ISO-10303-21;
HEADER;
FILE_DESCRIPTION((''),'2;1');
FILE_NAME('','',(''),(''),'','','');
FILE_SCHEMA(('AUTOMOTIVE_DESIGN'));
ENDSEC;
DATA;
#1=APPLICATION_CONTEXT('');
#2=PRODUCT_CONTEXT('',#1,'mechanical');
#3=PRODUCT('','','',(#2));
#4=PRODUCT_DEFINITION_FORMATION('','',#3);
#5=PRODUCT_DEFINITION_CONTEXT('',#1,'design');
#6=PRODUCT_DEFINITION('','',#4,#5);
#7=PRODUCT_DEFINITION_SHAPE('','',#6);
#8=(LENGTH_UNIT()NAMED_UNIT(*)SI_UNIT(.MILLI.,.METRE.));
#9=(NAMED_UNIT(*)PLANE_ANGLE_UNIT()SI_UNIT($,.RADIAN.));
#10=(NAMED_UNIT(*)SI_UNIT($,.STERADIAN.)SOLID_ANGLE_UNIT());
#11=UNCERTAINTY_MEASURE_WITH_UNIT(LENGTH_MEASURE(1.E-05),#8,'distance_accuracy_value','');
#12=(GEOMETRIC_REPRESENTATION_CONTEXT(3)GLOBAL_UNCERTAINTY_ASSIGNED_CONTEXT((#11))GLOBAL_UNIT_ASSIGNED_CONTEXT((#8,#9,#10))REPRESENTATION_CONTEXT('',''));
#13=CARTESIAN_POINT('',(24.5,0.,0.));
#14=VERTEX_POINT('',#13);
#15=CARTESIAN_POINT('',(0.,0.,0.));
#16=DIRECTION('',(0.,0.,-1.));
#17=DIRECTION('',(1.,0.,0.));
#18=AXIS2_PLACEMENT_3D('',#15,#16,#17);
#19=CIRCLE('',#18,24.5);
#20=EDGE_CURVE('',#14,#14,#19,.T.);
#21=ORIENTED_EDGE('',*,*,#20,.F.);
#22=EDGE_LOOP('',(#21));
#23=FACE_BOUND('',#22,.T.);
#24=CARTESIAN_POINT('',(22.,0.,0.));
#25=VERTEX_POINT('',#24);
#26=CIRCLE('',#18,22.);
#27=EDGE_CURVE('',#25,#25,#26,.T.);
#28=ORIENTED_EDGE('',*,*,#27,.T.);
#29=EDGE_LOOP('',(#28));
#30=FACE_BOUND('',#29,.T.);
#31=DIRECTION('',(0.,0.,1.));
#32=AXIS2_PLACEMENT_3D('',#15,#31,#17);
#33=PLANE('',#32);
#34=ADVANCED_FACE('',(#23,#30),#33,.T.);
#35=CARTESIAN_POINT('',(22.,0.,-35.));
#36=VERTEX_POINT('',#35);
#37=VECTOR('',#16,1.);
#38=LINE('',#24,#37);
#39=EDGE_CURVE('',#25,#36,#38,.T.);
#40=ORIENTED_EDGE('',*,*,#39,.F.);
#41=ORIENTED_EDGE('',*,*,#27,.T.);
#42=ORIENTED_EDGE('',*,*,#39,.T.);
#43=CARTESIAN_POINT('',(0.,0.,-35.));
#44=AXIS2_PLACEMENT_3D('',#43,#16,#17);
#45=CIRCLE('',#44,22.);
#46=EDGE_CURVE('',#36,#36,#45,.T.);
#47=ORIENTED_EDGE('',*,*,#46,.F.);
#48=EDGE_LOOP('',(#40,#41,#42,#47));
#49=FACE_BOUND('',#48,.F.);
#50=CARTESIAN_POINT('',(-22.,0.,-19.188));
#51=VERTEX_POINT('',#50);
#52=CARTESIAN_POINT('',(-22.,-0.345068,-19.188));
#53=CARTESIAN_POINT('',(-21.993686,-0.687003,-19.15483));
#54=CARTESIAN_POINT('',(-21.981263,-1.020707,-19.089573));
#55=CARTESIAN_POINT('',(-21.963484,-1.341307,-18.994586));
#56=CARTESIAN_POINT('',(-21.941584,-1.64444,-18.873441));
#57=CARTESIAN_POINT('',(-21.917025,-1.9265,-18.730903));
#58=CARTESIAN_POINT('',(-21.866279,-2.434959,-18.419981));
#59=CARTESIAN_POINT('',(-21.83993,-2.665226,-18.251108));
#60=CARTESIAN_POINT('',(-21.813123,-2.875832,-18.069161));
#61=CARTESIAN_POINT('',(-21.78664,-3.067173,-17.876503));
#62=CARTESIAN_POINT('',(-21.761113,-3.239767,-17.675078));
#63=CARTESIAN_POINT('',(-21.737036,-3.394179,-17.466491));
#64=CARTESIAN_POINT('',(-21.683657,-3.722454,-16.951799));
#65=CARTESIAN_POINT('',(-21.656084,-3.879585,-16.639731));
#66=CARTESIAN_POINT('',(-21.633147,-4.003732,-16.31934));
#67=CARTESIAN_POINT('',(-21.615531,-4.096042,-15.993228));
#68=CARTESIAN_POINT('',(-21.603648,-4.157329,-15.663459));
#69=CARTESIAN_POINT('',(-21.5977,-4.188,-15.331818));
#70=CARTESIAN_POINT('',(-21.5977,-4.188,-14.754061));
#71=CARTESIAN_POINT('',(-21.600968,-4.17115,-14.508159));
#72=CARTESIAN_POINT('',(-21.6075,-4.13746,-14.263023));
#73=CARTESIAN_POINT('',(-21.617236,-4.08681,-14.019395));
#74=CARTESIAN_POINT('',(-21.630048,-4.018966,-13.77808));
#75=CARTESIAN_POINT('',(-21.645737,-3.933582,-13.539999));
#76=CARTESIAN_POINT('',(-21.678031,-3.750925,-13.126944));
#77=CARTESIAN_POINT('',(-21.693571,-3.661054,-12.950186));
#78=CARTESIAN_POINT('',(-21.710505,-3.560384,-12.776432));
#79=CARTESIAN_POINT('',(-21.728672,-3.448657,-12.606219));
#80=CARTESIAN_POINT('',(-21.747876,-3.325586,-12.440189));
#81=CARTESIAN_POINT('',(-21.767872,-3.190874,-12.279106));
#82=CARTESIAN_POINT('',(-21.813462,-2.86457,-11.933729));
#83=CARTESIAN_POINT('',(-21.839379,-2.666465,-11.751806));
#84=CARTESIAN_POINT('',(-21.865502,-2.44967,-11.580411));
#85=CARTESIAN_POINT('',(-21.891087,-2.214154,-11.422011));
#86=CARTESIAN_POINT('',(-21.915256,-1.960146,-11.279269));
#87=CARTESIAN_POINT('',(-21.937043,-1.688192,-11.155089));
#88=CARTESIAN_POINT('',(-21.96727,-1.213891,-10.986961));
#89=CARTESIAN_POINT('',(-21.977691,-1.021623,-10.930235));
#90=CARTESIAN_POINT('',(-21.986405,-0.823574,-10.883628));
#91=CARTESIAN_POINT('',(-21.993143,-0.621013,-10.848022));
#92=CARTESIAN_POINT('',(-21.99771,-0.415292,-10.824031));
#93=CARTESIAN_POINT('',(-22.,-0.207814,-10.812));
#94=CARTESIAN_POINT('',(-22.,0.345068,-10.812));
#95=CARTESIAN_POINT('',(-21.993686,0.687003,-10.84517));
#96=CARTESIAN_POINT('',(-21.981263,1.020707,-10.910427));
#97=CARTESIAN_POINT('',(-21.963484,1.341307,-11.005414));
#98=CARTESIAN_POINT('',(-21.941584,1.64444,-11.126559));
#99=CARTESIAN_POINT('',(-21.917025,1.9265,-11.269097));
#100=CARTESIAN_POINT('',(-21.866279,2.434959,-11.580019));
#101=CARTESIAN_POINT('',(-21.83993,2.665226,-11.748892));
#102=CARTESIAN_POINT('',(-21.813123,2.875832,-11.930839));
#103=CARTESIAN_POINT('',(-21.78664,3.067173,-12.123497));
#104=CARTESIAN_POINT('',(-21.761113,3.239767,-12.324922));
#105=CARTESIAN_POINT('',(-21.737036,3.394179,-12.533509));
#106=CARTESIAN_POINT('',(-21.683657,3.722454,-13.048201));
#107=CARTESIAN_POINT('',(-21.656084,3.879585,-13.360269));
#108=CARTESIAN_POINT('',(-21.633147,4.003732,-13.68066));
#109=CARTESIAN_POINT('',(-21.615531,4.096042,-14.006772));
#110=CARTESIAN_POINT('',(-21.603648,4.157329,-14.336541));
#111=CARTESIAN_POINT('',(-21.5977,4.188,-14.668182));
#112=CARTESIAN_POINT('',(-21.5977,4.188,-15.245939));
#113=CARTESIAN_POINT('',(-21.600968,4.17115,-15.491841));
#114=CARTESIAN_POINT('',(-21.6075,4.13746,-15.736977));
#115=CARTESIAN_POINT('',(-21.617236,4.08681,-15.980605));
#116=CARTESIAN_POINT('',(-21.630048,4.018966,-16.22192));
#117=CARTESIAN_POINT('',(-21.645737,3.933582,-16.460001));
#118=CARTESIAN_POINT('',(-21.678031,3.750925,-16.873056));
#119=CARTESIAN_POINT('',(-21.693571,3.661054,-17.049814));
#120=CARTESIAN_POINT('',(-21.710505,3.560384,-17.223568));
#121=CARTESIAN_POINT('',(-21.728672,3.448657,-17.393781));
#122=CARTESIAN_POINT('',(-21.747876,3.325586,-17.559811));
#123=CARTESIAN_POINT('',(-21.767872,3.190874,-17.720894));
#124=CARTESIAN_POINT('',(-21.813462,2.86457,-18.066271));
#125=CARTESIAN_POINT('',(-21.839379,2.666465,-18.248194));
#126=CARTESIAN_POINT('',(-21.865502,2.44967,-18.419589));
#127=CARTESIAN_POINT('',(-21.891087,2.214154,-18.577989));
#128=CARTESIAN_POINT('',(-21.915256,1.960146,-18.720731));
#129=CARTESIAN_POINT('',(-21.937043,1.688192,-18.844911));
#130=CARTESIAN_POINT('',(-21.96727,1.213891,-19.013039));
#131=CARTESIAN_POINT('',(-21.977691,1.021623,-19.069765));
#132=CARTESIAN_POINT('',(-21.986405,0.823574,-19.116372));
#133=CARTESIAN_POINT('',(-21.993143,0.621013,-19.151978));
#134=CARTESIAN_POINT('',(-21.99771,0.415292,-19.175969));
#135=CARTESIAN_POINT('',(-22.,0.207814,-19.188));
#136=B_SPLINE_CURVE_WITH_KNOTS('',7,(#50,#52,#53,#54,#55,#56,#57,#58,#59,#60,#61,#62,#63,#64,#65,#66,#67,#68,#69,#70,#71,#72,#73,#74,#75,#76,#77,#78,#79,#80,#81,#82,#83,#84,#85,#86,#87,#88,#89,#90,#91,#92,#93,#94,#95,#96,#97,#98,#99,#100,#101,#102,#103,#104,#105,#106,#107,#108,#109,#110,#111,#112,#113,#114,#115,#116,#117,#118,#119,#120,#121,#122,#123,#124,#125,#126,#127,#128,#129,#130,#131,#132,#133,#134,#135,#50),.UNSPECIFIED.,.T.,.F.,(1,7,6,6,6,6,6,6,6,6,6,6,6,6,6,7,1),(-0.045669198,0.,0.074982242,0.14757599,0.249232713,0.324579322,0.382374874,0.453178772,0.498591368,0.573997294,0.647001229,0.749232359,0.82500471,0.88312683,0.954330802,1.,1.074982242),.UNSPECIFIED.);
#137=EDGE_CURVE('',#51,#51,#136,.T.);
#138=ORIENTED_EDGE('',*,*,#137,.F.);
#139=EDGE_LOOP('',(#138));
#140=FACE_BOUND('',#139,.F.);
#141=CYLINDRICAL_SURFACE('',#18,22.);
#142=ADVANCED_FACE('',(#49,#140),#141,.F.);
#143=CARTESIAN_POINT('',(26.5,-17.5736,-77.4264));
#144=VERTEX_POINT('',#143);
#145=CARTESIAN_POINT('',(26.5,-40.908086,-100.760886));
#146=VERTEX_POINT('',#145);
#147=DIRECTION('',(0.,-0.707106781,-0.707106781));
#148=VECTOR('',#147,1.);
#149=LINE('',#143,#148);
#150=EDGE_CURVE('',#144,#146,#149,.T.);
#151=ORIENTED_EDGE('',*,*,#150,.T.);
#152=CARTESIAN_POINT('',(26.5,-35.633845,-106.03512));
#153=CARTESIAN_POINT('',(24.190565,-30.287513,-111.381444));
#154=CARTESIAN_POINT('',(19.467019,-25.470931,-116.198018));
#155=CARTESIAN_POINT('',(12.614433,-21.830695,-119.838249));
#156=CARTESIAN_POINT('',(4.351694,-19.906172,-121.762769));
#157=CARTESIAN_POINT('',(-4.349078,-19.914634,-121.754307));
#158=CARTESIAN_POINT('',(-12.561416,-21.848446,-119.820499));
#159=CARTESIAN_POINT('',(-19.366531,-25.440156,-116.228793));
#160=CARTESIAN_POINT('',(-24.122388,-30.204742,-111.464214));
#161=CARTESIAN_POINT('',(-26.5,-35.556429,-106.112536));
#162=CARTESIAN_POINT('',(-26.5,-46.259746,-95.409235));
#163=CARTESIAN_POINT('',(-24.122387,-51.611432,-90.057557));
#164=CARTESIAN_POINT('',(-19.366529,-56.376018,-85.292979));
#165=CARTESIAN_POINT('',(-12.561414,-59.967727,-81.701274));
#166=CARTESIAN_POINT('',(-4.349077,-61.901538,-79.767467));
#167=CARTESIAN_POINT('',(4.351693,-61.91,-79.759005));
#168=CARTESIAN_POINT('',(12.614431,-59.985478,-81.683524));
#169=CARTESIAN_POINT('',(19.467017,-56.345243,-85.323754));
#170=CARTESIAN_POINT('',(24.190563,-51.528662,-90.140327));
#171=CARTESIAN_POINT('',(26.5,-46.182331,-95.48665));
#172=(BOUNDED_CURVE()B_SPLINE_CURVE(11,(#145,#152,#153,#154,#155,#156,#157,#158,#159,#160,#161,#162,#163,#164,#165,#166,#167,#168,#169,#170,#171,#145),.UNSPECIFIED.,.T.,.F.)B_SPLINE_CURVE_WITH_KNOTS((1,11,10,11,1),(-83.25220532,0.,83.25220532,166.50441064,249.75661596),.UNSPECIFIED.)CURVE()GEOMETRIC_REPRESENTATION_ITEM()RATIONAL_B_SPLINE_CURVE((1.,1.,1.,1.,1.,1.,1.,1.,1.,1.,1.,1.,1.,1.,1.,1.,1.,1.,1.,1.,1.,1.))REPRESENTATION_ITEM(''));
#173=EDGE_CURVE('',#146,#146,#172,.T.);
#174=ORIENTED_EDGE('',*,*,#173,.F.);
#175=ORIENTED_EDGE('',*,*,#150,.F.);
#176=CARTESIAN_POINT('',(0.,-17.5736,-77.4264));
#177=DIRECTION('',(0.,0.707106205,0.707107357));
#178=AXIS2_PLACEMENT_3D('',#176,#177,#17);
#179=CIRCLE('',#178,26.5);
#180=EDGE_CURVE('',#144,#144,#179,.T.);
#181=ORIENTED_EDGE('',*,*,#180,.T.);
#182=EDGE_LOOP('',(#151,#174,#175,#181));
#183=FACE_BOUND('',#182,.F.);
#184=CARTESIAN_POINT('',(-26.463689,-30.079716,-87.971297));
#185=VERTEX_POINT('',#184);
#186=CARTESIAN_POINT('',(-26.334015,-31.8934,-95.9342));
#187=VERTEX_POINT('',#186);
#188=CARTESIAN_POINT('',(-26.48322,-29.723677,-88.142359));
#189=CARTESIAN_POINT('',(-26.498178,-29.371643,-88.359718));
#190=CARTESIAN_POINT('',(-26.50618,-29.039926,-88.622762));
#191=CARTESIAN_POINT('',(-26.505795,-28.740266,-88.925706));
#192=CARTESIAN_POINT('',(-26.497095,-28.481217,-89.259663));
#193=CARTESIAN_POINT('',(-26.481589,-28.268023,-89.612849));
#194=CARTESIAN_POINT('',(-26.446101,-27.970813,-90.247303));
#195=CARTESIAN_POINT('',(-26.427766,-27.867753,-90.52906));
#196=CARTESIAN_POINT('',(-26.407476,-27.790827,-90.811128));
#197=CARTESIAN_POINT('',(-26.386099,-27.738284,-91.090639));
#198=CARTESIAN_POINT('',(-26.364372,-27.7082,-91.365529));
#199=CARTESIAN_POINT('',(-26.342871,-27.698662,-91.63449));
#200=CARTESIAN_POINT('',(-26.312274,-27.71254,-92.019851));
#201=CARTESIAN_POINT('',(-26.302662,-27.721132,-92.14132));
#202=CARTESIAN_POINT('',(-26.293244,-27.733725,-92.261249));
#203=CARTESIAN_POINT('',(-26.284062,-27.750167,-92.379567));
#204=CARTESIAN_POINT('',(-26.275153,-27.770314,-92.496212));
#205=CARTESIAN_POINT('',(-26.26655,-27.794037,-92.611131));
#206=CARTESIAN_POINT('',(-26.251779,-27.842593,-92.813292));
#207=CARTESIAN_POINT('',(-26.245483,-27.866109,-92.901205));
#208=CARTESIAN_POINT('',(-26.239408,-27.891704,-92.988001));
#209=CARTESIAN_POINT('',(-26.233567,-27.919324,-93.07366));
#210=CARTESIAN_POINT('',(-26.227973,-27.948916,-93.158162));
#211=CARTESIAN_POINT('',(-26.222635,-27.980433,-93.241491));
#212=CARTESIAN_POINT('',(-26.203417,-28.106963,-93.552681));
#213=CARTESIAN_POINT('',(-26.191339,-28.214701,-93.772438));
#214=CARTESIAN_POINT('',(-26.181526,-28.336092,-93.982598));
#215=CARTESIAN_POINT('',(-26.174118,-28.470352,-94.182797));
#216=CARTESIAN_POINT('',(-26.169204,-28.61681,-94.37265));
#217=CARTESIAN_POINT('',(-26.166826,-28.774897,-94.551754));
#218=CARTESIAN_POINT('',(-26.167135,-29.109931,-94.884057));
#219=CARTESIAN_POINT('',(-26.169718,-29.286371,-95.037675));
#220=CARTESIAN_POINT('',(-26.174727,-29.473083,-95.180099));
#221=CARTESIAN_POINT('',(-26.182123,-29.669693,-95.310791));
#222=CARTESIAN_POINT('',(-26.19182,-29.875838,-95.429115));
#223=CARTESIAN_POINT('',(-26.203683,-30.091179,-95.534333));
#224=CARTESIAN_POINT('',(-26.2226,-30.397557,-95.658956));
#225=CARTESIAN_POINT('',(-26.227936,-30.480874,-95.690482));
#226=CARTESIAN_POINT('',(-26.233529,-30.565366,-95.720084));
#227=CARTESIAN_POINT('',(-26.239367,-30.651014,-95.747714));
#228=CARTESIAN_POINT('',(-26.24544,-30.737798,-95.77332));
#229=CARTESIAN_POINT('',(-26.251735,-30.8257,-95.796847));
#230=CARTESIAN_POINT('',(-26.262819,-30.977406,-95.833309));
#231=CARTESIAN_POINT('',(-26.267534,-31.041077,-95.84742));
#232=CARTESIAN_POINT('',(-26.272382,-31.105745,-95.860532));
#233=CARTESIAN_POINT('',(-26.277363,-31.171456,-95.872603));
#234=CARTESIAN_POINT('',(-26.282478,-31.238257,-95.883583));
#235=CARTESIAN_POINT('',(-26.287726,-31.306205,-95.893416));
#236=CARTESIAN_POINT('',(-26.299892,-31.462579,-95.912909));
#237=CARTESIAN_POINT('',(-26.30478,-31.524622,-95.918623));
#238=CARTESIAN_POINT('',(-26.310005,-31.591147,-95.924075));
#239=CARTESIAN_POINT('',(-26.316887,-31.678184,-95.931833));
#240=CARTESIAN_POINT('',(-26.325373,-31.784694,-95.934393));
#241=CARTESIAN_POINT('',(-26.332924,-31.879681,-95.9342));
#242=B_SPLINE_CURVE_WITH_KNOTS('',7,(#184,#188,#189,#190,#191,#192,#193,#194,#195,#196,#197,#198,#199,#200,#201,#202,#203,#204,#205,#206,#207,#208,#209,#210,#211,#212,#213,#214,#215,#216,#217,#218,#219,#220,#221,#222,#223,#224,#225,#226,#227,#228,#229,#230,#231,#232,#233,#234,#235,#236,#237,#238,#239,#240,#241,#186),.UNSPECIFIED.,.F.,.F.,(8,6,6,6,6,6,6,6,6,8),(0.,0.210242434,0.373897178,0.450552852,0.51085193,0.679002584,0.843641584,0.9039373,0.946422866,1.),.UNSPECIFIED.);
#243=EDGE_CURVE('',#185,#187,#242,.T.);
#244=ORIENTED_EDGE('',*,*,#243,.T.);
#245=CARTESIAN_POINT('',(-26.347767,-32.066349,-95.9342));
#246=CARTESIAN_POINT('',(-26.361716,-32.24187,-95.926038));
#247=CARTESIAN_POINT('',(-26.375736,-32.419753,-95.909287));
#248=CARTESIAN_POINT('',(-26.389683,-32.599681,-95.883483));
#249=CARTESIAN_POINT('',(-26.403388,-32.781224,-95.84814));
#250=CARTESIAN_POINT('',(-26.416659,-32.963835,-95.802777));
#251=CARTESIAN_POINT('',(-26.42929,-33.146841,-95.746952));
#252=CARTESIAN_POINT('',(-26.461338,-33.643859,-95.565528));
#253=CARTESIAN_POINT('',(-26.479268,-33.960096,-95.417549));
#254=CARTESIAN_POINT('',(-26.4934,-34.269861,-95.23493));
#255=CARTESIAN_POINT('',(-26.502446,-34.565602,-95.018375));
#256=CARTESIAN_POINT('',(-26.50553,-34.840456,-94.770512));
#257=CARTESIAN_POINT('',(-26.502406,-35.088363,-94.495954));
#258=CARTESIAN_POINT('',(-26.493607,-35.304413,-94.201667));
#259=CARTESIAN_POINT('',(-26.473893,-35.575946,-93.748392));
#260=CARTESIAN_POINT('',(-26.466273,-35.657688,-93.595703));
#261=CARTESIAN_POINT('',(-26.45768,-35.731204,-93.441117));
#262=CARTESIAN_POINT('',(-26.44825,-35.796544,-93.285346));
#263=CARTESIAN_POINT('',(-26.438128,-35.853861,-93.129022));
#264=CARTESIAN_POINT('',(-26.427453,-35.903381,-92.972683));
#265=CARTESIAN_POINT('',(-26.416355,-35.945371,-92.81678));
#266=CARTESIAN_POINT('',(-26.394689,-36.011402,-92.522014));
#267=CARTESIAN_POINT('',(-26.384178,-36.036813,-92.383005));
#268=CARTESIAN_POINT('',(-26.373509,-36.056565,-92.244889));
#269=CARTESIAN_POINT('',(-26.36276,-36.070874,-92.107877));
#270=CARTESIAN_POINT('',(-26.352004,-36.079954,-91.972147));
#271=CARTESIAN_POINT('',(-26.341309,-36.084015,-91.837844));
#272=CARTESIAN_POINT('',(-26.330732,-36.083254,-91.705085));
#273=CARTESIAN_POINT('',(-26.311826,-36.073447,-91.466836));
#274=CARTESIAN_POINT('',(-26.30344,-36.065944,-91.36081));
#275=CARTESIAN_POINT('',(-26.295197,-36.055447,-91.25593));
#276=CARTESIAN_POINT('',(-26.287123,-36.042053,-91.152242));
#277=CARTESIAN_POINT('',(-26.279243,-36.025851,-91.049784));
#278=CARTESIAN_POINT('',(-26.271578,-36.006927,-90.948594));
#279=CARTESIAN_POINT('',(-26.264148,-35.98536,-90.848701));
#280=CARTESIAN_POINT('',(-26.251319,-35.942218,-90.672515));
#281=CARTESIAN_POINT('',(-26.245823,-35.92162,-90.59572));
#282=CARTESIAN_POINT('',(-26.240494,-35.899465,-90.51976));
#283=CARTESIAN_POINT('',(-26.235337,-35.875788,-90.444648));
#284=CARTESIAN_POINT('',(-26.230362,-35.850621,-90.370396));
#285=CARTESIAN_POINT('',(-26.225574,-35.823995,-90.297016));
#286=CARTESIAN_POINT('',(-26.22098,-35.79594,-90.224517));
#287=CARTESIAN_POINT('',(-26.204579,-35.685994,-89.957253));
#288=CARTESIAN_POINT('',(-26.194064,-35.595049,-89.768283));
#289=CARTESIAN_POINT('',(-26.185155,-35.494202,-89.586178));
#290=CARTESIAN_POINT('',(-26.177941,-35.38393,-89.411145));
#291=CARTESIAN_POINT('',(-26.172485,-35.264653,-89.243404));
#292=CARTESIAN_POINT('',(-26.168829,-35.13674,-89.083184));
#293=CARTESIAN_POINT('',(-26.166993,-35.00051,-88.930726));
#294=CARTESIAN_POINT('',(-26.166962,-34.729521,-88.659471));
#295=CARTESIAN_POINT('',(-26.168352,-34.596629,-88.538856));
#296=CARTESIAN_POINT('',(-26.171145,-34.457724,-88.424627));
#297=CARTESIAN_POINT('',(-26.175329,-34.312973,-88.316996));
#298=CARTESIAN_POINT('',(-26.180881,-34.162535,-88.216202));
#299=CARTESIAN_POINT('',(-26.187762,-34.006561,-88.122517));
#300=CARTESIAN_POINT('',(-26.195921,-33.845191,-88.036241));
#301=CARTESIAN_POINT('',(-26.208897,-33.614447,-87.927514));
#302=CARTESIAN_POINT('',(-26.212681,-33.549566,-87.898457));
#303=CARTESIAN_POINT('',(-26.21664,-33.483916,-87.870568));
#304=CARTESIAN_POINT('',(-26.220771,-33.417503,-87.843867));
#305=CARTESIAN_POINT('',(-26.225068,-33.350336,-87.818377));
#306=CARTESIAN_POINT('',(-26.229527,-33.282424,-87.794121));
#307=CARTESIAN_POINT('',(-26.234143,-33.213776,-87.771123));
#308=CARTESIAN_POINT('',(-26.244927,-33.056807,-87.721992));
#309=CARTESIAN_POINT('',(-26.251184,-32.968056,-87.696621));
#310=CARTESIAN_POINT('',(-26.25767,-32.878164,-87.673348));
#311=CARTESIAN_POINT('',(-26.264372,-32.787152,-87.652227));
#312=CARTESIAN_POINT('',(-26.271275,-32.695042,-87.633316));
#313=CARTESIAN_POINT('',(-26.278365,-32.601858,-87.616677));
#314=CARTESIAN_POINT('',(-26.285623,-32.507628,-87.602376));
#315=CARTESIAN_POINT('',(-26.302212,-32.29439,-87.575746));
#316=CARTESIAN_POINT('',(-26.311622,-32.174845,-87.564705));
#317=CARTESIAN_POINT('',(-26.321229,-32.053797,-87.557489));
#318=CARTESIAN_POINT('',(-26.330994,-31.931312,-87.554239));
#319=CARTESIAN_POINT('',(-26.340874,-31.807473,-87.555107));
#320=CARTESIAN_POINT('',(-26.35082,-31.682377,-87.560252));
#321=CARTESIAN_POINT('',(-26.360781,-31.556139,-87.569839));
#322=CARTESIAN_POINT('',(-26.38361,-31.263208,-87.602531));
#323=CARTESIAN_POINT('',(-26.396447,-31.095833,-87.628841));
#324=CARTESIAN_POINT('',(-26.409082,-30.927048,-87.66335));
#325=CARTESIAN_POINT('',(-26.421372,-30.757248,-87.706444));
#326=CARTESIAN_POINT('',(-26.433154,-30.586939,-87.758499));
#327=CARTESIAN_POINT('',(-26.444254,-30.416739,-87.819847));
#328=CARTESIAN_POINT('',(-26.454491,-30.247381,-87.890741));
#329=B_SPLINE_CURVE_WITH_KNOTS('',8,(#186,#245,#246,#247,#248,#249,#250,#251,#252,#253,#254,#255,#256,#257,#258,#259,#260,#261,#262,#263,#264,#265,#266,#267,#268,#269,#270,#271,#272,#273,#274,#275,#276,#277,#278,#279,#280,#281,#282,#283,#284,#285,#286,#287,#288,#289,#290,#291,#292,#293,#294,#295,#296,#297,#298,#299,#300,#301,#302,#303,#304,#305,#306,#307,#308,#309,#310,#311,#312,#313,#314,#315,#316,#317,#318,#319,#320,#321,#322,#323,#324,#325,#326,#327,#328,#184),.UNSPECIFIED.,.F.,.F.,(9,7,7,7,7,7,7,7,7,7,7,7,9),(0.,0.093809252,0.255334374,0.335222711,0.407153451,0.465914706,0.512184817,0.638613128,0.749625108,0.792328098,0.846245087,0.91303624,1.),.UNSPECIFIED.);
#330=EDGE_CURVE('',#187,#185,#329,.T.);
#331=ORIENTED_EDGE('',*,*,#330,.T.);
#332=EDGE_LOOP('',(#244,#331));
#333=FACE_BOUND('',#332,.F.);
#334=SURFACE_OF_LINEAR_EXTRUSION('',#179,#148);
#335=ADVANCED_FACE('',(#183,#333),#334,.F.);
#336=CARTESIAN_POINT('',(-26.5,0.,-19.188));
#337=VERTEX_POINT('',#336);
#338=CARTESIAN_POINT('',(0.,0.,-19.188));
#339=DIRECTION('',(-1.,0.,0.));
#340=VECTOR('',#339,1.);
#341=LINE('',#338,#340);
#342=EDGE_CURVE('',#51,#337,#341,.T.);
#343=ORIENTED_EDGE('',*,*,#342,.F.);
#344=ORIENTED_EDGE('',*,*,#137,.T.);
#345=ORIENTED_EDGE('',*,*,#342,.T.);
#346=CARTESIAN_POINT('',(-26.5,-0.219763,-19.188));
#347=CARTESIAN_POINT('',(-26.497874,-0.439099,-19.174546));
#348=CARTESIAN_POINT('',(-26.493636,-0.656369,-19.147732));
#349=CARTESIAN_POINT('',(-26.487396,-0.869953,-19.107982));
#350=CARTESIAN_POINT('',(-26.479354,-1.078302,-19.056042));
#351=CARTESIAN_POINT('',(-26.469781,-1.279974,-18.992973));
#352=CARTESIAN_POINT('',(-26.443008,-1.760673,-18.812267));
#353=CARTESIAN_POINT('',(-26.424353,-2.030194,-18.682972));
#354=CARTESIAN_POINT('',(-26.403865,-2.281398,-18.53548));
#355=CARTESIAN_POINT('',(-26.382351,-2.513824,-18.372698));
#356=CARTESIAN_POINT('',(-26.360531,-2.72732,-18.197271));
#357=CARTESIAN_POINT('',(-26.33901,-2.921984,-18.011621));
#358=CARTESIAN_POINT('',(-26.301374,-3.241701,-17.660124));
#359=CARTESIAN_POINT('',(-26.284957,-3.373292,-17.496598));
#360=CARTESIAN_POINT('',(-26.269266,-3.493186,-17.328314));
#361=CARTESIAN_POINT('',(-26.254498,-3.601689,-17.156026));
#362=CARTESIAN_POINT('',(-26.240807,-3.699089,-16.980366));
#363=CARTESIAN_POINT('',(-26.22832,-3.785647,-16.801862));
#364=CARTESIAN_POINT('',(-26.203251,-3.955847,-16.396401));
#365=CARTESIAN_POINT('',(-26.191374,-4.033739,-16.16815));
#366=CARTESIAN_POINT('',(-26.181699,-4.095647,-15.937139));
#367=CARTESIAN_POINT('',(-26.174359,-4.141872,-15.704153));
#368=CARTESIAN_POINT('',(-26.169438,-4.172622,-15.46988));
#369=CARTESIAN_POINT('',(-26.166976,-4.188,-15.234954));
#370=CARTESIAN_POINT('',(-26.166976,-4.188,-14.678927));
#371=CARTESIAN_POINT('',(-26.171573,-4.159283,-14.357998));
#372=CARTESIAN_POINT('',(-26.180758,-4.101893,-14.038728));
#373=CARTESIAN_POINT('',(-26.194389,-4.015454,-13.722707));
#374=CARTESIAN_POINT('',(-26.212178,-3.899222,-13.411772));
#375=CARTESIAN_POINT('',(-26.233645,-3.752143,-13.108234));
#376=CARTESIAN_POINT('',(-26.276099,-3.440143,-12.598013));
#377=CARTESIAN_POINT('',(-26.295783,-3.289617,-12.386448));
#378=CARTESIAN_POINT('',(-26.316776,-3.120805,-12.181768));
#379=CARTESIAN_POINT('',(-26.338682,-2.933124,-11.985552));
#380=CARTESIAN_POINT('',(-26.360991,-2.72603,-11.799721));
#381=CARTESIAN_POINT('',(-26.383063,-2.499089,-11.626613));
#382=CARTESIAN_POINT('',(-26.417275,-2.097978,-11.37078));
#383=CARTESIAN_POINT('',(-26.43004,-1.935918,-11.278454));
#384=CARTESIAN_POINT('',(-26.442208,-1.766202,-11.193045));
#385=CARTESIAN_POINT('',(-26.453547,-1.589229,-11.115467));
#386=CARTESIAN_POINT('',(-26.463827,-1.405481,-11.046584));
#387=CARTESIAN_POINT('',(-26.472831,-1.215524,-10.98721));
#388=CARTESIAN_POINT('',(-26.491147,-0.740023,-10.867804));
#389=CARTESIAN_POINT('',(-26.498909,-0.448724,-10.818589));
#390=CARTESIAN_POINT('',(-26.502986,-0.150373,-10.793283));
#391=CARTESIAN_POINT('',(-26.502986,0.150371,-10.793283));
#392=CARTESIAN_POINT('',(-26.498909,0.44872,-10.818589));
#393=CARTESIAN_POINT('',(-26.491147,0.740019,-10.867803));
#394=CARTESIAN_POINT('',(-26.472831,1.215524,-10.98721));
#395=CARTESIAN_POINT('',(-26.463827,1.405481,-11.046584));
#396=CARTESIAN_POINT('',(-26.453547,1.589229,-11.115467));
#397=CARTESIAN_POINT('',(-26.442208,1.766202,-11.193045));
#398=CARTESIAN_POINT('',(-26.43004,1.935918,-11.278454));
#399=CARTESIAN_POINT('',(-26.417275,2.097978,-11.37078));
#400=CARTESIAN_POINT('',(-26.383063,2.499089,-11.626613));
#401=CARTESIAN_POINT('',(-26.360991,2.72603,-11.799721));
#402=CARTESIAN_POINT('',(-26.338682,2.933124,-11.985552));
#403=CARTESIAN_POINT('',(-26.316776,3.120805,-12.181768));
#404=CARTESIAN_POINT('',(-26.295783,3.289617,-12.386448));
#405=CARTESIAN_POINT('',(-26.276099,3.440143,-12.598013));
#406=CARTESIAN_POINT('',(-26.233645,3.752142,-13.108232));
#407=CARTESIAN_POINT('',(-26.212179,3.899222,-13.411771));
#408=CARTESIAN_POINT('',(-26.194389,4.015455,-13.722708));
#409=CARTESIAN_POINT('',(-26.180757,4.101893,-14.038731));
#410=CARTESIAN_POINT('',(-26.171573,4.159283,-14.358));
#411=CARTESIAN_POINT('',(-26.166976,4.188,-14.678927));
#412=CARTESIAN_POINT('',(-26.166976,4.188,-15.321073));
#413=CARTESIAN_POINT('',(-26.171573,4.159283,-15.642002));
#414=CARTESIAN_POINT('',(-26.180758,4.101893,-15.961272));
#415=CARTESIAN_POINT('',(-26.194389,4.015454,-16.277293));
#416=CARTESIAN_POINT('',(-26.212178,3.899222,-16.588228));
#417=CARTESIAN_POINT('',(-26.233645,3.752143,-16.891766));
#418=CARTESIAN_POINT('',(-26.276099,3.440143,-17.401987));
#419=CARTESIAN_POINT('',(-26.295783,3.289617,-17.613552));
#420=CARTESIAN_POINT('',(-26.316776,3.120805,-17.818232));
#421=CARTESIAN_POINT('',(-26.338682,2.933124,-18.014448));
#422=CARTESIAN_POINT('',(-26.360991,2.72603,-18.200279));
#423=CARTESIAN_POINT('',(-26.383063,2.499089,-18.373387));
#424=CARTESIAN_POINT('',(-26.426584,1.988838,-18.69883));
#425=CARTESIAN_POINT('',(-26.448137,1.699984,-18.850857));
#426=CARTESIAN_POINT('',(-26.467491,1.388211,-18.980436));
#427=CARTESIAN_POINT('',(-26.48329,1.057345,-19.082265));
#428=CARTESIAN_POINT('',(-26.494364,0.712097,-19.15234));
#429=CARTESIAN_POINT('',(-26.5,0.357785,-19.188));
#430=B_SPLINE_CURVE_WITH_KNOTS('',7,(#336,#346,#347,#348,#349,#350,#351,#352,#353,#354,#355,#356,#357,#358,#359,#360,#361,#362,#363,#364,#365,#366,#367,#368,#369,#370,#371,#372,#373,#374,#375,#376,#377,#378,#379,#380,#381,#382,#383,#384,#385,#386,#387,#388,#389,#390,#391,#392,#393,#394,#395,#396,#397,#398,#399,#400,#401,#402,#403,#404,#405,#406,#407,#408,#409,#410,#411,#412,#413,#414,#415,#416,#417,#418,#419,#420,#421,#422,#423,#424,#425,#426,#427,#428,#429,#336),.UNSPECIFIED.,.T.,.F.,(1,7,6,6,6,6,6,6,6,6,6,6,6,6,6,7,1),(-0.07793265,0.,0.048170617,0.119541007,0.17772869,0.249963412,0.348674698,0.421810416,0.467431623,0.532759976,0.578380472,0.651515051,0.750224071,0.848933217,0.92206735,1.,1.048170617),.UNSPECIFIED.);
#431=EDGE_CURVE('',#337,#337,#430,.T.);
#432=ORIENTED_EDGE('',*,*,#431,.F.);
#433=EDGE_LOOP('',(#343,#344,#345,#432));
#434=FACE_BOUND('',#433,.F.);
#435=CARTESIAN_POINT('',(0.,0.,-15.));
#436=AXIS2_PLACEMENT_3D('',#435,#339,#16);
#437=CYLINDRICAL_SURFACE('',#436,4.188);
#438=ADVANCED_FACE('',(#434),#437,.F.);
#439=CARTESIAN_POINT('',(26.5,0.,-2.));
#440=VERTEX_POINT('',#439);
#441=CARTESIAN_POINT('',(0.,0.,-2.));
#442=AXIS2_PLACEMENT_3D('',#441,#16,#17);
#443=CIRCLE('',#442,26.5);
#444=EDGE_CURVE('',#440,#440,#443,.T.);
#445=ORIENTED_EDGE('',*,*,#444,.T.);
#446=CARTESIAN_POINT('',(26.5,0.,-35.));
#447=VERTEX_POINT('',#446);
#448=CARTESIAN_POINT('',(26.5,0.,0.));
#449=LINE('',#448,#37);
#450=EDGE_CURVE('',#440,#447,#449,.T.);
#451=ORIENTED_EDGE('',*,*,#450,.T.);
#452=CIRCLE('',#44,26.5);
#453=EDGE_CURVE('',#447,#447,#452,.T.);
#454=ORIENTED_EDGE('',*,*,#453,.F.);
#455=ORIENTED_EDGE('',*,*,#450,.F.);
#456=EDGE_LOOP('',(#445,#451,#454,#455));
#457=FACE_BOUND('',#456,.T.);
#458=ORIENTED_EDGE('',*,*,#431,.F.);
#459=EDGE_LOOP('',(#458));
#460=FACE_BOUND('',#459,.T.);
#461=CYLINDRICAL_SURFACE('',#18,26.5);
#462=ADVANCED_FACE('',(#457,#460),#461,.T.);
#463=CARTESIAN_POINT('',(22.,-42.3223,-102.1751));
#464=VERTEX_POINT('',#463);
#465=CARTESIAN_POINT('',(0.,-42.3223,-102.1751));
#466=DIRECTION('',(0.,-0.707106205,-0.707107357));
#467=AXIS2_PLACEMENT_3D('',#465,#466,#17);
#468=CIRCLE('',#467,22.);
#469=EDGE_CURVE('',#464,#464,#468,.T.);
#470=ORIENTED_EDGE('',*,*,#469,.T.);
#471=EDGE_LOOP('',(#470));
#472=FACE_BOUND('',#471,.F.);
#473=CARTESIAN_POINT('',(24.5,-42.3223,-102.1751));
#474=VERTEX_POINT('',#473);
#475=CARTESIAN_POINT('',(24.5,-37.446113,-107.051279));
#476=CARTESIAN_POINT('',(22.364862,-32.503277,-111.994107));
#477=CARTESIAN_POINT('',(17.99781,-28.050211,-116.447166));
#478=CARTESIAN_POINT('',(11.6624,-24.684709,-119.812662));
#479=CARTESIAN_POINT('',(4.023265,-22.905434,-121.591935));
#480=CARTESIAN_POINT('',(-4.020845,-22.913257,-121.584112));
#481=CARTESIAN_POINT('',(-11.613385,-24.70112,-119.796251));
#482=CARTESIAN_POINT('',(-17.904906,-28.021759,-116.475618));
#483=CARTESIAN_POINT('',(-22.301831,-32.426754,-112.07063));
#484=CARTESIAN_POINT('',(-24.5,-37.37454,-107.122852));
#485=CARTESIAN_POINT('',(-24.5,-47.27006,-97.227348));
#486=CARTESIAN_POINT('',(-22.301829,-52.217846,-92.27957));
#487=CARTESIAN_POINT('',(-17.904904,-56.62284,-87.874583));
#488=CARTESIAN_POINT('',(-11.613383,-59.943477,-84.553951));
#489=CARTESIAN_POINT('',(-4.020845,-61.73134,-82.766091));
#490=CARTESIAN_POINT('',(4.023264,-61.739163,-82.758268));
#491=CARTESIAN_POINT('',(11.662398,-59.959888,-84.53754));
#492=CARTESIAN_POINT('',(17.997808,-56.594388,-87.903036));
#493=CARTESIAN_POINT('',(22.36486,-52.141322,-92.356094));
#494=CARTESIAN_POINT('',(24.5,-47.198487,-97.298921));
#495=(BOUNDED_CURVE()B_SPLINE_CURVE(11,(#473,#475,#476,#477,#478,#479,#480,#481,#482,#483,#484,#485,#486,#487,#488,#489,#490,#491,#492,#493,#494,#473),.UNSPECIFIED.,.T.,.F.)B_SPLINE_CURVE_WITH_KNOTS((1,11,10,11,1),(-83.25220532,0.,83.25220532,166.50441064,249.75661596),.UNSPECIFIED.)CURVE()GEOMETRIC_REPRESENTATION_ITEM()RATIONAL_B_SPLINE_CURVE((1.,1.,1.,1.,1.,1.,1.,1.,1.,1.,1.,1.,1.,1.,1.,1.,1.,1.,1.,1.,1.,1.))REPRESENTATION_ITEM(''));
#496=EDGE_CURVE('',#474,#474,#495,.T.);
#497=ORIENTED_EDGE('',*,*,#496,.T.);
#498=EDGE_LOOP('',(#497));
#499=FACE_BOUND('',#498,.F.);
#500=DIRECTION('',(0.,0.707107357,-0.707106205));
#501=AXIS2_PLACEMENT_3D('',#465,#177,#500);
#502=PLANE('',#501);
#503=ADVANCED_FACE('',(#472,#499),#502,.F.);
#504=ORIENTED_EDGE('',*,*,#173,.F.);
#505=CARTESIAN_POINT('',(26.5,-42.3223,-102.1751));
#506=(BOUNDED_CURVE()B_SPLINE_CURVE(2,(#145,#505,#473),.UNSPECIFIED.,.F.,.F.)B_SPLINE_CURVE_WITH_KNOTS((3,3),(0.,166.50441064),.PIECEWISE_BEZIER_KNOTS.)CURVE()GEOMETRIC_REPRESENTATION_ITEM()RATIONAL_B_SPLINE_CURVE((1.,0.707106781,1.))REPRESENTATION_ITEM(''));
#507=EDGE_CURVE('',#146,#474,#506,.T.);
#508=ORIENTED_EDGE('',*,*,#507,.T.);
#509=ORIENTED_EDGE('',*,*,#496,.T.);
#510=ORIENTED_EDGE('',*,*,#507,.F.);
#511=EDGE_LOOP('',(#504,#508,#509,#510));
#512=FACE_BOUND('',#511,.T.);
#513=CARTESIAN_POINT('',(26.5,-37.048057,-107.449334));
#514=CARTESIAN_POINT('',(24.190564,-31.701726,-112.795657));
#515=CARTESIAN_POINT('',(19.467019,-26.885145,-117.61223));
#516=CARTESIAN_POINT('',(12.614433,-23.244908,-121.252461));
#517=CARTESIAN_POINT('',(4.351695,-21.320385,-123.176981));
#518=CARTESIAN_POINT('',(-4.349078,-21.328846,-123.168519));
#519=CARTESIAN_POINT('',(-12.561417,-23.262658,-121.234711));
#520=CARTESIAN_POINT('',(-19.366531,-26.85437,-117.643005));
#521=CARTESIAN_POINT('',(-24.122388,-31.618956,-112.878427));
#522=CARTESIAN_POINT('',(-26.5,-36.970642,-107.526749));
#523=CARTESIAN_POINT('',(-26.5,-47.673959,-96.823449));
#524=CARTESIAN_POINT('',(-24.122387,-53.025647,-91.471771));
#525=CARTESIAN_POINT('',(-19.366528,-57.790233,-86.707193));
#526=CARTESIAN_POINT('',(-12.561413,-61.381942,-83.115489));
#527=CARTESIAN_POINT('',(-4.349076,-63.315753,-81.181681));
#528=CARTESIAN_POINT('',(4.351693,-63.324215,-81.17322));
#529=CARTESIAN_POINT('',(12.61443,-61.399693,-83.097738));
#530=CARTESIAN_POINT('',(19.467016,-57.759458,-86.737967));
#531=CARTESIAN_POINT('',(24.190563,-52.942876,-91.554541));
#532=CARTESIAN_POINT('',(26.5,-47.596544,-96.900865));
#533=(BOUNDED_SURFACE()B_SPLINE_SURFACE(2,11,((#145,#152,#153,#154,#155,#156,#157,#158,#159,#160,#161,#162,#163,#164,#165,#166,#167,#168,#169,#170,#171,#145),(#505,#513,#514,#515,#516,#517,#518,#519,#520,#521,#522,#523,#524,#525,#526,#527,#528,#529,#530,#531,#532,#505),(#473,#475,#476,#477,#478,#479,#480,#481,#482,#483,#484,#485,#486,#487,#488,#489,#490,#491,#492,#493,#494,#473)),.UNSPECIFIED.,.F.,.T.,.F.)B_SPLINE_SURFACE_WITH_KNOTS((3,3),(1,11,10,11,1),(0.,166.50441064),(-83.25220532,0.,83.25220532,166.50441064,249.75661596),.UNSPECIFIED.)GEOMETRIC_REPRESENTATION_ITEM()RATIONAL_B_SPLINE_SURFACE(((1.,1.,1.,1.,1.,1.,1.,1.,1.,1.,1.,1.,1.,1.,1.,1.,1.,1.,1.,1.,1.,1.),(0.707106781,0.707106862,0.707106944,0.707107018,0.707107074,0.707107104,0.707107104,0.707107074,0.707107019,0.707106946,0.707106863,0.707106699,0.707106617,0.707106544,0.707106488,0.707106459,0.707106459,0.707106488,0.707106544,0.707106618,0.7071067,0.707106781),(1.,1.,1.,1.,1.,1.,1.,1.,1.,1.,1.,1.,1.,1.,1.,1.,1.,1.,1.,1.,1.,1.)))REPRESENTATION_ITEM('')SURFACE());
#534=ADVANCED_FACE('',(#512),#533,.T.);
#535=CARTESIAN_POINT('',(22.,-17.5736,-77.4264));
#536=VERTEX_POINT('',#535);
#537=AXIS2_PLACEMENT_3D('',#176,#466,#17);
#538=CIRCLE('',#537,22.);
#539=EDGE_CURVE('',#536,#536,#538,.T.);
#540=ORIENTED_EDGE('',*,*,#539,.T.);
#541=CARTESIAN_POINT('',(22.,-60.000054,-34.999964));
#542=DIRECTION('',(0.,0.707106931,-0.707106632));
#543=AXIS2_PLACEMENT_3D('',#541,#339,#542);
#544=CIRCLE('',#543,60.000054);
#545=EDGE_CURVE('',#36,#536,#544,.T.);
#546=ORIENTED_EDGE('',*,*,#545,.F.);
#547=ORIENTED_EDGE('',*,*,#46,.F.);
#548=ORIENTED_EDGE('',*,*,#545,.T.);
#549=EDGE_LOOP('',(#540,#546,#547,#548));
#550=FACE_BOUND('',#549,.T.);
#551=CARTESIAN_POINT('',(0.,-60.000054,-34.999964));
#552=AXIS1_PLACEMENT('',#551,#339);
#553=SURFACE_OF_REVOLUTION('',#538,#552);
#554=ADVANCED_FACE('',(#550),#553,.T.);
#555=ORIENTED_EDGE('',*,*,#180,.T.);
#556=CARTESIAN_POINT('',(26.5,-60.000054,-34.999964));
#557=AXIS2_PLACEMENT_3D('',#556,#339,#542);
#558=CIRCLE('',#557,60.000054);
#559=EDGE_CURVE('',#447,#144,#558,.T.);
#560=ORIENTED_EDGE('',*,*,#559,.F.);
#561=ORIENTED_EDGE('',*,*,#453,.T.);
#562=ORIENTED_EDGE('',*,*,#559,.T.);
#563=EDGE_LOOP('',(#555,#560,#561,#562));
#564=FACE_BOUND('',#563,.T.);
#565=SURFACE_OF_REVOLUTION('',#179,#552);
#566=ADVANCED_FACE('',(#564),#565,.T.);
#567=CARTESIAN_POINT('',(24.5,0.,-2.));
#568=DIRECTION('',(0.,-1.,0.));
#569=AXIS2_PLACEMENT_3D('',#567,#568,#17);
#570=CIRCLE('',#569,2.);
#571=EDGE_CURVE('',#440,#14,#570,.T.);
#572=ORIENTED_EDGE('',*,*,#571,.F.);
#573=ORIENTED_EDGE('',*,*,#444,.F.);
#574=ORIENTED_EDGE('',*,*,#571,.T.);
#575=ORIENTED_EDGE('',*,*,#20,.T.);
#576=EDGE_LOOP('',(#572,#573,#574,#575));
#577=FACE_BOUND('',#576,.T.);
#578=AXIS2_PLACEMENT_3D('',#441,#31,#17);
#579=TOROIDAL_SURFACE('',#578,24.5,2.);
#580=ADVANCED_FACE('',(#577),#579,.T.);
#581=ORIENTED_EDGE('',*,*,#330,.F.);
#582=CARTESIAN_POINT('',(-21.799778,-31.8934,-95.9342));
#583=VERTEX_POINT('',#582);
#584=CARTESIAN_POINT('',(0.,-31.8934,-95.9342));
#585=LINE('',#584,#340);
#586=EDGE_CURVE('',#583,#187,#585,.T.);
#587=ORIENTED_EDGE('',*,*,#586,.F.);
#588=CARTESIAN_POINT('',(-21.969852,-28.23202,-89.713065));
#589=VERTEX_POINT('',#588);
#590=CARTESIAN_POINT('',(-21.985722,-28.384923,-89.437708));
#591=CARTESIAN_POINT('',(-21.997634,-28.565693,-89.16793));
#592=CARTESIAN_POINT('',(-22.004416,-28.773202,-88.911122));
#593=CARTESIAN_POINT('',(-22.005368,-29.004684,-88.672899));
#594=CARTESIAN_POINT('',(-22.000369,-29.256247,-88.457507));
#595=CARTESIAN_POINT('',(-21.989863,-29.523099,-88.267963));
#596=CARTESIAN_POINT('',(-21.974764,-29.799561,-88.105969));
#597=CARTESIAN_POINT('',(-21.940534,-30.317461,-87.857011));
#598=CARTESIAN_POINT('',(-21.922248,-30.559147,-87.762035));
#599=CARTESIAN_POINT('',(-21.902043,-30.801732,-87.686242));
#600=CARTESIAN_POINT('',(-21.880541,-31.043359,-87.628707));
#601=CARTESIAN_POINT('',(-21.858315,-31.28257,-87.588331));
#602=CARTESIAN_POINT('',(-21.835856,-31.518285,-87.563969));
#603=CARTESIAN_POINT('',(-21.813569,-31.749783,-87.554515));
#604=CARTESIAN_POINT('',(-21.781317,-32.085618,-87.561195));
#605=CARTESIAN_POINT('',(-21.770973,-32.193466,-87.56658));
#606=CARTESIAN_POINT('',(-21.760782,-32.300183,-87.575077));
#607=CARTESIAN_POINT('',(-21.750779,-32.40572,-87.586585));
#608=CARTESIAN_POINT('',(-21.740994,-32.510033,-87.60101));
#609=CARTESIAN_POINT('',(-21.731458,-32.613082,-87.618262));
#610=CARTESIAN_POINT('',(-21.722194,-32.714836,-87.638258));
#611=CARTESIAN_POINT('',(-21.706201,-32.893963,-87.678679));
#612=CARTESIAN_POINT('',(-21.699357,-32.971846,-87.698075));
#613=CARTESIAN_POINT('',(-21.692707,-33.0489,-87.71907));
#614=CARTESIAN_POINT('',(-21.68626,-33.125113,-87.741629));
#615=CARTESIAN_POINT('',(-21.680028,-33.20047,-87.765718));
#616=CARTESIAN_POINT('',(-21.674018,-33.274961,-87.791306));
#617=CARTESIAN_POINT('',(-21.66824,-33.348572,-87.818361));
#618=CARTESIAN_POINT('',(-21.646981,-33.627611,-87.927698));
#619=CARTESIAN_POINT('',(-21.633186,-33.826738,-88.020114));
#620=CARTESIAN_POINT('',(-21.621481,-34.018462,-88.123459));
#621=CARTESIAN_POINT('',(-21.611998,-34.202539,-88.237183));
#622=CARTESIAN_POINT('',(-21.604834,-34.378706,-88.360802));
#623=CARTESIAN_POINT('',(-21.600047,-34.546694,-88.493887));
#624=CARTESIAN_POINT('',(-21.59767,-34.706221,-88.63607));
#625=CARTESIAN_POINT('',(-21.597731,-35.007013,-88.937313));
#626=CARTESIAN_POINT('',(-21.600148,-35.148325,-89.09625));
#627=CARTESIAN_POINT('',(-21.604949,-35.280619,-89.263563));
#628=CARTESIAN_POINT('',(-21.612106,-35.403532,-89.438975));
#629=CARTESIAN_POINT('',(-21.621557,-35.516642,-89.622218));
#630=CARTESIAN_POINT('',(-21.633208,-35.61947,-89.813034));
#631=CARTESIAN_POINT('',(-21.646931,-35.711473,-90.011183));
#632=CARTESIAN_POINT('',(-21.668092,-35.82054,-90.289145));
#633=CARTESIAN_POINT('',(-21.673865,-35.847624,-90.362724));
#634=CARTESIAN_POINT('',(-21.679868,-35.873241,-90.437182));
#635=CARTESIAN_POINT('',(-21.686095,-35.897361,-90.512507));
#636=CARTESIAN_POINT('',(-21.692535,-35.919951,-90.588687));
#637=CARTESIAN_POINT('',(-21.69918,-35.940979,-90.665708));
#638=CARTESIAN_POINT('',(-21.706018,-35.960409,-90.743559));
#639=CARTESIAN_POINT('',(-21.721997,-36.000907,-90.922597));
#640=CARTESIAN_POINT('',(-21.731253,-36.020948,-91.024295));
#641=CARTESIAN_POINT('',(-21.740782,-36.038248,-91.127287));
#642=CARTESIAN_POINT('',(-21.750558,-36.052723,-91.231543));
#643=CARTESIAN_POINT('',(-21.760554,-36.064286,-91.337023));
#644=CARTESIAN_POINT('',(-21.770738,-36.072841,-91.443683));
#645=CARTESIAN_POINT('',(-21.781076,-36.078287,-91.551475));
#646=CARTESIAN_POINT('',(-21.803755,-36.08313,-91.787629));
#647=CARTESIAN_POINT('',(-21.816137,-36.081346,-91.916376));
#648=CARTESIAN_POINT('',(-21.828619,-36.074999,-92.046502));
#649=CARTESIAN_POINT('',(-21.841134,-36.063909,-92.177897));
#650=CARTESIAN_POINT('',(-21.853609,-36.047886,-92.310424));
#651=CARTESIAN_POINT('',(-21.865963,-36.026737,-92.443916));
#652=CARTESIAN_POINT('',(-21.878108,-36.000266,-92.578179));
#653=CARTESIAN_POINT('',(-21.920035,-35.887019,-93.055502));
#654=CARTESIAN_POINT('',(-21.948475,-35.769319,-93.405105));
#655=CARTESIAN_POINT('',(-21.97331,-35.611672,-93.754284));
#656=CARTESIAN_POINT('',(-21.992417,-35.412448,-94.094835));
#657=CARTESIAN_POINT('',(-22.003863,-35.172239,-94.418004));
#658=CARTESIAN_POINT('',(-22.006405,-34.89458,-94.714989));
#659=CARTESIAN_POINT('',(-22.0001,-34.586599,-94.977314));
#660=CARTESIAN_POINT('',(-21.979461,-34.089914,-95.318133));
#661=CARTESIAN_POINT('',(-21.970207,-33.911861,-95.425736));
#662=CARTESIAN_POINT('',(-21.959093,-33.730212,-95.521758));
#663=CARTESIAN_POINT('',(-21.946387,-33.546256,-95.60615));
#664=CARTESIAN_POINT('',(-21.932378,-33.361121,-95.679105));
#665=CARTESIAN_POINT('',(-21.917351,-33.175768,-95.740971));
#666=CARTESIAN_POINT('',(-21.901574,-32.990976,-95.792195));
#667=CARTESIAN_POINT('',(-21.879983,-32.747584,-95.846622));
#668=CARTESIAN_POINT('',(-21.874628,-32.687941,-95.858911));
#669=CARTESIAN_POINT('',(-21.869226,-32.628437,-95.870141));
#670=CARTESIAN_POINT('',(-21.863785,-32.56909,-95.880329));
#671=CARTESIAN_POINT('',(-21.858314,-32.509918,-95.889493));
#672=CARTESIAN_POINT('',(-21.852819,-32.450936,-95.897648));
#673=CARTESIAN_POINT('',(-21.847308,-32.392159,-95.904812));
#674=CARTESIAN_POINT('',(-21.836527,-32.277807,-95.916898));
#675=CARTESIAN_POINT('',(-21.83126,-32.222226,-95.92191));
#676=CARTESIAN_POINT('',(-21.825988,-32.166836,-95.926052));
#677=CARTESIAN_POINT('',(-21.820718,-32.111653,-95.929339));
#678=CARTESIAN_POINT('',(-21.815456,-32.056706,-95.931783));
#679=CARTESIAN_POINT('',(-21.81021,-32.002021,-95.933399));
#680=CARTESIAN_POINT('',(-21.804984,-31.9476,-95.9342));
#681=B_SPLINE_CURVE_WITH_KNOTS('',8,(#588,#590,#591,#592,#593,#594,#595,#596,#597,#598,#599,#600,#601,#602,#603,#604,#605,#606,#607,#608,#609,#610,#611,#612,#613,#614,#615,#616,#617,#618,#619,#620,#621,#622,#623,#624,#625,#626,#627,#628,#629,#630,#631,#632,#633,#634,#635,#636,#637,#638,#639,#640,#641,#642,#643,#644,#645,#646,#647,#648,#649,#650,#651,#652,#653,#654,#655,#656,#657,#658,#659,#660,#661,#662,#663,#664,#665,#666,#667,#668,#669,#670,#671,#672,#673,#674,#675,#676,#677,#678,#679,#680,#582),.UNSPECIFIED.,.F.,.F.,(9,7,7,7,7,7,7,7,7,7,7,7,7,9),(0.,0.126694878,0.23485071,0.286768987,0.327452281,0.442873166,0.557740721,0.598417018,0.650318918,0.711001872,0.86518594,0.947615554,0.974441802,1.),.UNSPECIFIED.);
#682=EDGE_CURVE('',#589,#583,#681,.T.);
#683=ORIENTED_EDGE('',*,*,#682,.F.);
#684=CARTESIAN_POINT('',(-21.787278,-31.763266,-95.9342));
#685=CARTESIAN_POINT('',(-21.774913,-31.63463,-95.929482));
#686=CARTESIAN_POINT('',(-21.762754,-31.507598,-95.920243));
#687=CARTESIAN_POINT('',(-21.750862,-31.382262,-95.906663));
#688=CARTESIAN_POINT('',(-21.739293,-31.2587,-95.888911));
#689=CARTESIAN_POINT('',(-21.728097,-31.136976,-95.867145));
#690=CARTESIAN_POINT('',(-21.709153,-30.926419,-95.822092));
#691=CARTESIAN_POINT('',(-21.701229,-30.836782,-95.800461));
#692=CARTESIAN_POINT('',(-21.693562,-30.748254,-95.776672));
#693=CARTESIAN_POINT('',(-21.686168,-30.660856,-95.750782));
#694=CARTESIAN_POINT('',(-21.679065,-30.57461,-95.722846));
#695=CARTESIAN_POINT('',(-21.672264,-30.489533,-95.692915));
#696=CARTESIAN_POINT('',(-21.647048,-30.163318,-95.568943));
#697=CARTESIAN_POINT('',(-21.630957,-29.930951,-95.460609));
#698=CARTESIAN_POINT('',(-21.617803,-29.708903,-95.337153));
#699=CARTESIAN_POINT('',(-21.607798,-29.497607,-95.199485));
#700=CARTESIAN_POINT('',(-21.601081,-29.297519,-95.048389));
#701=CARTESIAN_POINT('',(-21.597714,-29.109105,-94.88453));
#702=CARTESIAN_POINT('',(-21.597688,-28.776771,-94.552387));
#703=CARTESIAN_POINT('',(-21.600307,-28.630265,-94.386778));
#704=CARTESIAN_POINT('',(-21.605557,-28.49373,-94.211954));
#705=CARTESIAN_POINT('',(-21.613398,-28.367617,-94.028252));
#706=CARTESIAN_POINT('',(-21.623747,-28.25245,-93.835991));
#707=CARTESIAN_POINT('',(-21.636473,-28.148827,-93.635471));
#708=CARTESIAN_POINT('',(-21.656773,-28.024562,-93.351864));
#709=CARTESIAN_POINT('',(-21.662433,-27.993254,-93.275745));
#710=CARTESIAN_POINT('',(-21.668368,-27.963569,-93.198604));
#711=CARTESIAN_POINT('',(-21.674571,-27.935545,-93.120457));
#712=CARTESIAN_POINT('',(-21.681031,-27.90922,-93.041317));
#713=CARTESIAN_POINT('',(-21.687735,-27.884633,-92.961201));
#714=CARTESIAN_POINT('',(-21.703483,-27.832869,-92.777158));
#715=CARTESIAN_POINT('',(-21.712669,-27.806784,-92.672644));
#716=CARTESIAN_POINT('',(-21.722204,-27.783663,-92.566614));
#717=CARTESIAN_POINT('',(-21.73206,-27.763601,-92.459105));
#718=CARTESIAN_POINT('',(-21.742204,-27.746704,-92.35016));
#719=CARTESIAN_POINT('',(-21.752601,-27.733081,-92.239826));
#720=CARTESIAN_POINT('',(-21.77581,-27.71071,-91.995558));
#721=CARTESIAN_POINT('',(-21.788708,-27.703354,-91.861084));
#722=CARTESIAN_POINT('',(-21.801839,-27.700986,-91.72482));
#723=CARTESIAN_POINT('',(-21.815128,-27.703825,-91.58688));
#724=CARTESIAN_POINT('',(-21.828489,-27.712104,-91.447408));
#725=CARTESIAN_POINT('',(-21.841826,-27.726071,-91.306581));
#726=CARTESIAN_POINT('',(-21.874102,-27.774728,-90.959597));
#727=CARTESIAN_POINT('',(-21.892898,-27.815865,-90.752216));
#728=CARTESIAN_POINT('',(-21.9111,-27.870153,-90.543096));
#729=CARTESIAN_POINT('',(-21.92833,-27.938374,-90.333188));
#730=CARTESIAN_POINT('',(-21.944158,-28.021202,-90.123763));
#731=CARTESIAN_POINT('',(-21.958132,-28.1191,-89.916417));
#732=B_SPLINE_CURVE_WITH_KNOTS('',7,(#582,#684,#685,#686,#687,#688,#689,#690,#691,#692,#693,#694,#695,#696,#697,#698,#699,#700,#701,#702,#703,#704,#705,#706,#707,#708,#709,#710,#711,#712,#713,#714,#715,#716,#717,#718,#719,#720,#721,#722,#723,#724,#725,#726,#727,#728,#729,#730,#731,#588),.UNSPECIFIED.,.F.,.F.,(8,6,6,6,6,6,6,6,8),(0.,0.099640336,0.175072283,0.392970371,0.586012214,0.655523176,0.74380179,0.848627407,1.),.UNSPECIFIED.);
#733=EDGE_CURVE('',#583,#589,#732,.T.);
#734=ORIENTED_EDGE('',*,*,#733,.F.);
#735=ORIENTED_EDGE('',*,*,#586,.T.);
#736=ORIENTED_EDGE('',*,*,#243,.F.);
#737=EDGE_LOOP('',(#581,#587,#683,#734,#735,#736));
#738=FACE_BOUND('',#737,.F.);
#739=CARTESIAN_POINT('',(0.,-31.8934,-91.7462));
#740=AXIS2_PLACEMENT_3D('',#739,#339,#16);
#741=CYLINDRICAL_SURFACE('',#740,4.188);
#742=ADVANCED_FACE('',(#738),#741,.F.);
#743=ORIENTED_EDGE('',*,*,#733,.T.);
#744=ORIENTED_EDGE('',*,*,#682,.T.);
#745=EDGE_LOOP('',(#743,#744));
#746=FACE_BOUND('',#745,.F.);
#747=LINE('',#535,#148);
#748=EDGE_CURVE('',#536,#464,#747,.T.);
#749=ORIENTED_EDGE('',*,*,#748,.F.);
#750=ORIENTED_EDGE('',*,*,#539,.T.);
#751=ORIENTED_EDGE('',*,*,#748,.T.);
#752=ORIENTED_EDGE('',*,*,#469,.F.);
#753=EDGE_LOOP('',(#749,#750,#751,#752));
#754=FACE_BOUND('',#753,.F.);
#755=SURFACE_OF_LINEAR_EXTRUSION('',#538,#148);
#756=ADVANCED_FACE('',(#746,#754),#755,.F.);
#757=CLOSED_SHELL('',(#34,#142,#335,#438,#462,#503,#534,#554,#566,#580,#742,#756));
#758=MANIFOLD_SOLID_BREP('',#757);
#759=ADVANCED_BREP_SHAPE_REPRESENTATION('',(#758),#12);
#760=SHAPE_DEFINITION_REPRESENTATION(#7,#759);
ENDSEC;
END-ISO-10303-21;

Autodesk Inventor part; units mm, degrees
ref_plane "YZ Plane" through (0, 0, 0) normal (1, 0, 0) x (0, 1, 0)
ref_plane "XZ Plane" through (0, 0, 0) normal (0, 1, 0) x (-1, 0, 0)
ref_plane "XY Plane" through (0, 0, 0) normal (0, 0, 1) x (1, 0, 0)
sketch "Sketch3" plane through (0, 0, 0) normal (1, 0, 0) x (0, 1, 0)
  line L0 (0, 0) -> (0, -35)
  line L1 (-17.5736, -77.4264) -> (-42.3223, -102.1751)
  arc A0 (-17.5736, -77.4264) -> (0, -35) centre (-60, -35) ccw
  point P0 (0, -59.8528)
  point P1 (0, -15)
  point P2 (-31.8934, -91.7462)
  dimension "d36" = 135
  dimension "d37" = 60
  dimension "d41" = 15
  dimension "d50" = 35
sketch "Sketch1" plane through (0, 0, 0) normal (0, 0, 1) x (1, 0, 0)
  circle A0 centre (0, 0) radius 22
  circle A1 centre (0, 0) radius 26.5
  dimension "d1" = 53
  dimension "d2" = 44
sweep "Sweep1" add profiles "Sketch1" path "Sketch3"
hole "Hole3" at (0, 0, -15) at (0, -31.8934, -91.7462) direction (-1, 0, 0) diameter 8.376 end through all
fillet "Fillet3" radius 2 2 edges at (-26.5, 0, 0) (-26.5, -42.3223, -102.1751)
properties part number "55-7" material "Iron, Cast"
